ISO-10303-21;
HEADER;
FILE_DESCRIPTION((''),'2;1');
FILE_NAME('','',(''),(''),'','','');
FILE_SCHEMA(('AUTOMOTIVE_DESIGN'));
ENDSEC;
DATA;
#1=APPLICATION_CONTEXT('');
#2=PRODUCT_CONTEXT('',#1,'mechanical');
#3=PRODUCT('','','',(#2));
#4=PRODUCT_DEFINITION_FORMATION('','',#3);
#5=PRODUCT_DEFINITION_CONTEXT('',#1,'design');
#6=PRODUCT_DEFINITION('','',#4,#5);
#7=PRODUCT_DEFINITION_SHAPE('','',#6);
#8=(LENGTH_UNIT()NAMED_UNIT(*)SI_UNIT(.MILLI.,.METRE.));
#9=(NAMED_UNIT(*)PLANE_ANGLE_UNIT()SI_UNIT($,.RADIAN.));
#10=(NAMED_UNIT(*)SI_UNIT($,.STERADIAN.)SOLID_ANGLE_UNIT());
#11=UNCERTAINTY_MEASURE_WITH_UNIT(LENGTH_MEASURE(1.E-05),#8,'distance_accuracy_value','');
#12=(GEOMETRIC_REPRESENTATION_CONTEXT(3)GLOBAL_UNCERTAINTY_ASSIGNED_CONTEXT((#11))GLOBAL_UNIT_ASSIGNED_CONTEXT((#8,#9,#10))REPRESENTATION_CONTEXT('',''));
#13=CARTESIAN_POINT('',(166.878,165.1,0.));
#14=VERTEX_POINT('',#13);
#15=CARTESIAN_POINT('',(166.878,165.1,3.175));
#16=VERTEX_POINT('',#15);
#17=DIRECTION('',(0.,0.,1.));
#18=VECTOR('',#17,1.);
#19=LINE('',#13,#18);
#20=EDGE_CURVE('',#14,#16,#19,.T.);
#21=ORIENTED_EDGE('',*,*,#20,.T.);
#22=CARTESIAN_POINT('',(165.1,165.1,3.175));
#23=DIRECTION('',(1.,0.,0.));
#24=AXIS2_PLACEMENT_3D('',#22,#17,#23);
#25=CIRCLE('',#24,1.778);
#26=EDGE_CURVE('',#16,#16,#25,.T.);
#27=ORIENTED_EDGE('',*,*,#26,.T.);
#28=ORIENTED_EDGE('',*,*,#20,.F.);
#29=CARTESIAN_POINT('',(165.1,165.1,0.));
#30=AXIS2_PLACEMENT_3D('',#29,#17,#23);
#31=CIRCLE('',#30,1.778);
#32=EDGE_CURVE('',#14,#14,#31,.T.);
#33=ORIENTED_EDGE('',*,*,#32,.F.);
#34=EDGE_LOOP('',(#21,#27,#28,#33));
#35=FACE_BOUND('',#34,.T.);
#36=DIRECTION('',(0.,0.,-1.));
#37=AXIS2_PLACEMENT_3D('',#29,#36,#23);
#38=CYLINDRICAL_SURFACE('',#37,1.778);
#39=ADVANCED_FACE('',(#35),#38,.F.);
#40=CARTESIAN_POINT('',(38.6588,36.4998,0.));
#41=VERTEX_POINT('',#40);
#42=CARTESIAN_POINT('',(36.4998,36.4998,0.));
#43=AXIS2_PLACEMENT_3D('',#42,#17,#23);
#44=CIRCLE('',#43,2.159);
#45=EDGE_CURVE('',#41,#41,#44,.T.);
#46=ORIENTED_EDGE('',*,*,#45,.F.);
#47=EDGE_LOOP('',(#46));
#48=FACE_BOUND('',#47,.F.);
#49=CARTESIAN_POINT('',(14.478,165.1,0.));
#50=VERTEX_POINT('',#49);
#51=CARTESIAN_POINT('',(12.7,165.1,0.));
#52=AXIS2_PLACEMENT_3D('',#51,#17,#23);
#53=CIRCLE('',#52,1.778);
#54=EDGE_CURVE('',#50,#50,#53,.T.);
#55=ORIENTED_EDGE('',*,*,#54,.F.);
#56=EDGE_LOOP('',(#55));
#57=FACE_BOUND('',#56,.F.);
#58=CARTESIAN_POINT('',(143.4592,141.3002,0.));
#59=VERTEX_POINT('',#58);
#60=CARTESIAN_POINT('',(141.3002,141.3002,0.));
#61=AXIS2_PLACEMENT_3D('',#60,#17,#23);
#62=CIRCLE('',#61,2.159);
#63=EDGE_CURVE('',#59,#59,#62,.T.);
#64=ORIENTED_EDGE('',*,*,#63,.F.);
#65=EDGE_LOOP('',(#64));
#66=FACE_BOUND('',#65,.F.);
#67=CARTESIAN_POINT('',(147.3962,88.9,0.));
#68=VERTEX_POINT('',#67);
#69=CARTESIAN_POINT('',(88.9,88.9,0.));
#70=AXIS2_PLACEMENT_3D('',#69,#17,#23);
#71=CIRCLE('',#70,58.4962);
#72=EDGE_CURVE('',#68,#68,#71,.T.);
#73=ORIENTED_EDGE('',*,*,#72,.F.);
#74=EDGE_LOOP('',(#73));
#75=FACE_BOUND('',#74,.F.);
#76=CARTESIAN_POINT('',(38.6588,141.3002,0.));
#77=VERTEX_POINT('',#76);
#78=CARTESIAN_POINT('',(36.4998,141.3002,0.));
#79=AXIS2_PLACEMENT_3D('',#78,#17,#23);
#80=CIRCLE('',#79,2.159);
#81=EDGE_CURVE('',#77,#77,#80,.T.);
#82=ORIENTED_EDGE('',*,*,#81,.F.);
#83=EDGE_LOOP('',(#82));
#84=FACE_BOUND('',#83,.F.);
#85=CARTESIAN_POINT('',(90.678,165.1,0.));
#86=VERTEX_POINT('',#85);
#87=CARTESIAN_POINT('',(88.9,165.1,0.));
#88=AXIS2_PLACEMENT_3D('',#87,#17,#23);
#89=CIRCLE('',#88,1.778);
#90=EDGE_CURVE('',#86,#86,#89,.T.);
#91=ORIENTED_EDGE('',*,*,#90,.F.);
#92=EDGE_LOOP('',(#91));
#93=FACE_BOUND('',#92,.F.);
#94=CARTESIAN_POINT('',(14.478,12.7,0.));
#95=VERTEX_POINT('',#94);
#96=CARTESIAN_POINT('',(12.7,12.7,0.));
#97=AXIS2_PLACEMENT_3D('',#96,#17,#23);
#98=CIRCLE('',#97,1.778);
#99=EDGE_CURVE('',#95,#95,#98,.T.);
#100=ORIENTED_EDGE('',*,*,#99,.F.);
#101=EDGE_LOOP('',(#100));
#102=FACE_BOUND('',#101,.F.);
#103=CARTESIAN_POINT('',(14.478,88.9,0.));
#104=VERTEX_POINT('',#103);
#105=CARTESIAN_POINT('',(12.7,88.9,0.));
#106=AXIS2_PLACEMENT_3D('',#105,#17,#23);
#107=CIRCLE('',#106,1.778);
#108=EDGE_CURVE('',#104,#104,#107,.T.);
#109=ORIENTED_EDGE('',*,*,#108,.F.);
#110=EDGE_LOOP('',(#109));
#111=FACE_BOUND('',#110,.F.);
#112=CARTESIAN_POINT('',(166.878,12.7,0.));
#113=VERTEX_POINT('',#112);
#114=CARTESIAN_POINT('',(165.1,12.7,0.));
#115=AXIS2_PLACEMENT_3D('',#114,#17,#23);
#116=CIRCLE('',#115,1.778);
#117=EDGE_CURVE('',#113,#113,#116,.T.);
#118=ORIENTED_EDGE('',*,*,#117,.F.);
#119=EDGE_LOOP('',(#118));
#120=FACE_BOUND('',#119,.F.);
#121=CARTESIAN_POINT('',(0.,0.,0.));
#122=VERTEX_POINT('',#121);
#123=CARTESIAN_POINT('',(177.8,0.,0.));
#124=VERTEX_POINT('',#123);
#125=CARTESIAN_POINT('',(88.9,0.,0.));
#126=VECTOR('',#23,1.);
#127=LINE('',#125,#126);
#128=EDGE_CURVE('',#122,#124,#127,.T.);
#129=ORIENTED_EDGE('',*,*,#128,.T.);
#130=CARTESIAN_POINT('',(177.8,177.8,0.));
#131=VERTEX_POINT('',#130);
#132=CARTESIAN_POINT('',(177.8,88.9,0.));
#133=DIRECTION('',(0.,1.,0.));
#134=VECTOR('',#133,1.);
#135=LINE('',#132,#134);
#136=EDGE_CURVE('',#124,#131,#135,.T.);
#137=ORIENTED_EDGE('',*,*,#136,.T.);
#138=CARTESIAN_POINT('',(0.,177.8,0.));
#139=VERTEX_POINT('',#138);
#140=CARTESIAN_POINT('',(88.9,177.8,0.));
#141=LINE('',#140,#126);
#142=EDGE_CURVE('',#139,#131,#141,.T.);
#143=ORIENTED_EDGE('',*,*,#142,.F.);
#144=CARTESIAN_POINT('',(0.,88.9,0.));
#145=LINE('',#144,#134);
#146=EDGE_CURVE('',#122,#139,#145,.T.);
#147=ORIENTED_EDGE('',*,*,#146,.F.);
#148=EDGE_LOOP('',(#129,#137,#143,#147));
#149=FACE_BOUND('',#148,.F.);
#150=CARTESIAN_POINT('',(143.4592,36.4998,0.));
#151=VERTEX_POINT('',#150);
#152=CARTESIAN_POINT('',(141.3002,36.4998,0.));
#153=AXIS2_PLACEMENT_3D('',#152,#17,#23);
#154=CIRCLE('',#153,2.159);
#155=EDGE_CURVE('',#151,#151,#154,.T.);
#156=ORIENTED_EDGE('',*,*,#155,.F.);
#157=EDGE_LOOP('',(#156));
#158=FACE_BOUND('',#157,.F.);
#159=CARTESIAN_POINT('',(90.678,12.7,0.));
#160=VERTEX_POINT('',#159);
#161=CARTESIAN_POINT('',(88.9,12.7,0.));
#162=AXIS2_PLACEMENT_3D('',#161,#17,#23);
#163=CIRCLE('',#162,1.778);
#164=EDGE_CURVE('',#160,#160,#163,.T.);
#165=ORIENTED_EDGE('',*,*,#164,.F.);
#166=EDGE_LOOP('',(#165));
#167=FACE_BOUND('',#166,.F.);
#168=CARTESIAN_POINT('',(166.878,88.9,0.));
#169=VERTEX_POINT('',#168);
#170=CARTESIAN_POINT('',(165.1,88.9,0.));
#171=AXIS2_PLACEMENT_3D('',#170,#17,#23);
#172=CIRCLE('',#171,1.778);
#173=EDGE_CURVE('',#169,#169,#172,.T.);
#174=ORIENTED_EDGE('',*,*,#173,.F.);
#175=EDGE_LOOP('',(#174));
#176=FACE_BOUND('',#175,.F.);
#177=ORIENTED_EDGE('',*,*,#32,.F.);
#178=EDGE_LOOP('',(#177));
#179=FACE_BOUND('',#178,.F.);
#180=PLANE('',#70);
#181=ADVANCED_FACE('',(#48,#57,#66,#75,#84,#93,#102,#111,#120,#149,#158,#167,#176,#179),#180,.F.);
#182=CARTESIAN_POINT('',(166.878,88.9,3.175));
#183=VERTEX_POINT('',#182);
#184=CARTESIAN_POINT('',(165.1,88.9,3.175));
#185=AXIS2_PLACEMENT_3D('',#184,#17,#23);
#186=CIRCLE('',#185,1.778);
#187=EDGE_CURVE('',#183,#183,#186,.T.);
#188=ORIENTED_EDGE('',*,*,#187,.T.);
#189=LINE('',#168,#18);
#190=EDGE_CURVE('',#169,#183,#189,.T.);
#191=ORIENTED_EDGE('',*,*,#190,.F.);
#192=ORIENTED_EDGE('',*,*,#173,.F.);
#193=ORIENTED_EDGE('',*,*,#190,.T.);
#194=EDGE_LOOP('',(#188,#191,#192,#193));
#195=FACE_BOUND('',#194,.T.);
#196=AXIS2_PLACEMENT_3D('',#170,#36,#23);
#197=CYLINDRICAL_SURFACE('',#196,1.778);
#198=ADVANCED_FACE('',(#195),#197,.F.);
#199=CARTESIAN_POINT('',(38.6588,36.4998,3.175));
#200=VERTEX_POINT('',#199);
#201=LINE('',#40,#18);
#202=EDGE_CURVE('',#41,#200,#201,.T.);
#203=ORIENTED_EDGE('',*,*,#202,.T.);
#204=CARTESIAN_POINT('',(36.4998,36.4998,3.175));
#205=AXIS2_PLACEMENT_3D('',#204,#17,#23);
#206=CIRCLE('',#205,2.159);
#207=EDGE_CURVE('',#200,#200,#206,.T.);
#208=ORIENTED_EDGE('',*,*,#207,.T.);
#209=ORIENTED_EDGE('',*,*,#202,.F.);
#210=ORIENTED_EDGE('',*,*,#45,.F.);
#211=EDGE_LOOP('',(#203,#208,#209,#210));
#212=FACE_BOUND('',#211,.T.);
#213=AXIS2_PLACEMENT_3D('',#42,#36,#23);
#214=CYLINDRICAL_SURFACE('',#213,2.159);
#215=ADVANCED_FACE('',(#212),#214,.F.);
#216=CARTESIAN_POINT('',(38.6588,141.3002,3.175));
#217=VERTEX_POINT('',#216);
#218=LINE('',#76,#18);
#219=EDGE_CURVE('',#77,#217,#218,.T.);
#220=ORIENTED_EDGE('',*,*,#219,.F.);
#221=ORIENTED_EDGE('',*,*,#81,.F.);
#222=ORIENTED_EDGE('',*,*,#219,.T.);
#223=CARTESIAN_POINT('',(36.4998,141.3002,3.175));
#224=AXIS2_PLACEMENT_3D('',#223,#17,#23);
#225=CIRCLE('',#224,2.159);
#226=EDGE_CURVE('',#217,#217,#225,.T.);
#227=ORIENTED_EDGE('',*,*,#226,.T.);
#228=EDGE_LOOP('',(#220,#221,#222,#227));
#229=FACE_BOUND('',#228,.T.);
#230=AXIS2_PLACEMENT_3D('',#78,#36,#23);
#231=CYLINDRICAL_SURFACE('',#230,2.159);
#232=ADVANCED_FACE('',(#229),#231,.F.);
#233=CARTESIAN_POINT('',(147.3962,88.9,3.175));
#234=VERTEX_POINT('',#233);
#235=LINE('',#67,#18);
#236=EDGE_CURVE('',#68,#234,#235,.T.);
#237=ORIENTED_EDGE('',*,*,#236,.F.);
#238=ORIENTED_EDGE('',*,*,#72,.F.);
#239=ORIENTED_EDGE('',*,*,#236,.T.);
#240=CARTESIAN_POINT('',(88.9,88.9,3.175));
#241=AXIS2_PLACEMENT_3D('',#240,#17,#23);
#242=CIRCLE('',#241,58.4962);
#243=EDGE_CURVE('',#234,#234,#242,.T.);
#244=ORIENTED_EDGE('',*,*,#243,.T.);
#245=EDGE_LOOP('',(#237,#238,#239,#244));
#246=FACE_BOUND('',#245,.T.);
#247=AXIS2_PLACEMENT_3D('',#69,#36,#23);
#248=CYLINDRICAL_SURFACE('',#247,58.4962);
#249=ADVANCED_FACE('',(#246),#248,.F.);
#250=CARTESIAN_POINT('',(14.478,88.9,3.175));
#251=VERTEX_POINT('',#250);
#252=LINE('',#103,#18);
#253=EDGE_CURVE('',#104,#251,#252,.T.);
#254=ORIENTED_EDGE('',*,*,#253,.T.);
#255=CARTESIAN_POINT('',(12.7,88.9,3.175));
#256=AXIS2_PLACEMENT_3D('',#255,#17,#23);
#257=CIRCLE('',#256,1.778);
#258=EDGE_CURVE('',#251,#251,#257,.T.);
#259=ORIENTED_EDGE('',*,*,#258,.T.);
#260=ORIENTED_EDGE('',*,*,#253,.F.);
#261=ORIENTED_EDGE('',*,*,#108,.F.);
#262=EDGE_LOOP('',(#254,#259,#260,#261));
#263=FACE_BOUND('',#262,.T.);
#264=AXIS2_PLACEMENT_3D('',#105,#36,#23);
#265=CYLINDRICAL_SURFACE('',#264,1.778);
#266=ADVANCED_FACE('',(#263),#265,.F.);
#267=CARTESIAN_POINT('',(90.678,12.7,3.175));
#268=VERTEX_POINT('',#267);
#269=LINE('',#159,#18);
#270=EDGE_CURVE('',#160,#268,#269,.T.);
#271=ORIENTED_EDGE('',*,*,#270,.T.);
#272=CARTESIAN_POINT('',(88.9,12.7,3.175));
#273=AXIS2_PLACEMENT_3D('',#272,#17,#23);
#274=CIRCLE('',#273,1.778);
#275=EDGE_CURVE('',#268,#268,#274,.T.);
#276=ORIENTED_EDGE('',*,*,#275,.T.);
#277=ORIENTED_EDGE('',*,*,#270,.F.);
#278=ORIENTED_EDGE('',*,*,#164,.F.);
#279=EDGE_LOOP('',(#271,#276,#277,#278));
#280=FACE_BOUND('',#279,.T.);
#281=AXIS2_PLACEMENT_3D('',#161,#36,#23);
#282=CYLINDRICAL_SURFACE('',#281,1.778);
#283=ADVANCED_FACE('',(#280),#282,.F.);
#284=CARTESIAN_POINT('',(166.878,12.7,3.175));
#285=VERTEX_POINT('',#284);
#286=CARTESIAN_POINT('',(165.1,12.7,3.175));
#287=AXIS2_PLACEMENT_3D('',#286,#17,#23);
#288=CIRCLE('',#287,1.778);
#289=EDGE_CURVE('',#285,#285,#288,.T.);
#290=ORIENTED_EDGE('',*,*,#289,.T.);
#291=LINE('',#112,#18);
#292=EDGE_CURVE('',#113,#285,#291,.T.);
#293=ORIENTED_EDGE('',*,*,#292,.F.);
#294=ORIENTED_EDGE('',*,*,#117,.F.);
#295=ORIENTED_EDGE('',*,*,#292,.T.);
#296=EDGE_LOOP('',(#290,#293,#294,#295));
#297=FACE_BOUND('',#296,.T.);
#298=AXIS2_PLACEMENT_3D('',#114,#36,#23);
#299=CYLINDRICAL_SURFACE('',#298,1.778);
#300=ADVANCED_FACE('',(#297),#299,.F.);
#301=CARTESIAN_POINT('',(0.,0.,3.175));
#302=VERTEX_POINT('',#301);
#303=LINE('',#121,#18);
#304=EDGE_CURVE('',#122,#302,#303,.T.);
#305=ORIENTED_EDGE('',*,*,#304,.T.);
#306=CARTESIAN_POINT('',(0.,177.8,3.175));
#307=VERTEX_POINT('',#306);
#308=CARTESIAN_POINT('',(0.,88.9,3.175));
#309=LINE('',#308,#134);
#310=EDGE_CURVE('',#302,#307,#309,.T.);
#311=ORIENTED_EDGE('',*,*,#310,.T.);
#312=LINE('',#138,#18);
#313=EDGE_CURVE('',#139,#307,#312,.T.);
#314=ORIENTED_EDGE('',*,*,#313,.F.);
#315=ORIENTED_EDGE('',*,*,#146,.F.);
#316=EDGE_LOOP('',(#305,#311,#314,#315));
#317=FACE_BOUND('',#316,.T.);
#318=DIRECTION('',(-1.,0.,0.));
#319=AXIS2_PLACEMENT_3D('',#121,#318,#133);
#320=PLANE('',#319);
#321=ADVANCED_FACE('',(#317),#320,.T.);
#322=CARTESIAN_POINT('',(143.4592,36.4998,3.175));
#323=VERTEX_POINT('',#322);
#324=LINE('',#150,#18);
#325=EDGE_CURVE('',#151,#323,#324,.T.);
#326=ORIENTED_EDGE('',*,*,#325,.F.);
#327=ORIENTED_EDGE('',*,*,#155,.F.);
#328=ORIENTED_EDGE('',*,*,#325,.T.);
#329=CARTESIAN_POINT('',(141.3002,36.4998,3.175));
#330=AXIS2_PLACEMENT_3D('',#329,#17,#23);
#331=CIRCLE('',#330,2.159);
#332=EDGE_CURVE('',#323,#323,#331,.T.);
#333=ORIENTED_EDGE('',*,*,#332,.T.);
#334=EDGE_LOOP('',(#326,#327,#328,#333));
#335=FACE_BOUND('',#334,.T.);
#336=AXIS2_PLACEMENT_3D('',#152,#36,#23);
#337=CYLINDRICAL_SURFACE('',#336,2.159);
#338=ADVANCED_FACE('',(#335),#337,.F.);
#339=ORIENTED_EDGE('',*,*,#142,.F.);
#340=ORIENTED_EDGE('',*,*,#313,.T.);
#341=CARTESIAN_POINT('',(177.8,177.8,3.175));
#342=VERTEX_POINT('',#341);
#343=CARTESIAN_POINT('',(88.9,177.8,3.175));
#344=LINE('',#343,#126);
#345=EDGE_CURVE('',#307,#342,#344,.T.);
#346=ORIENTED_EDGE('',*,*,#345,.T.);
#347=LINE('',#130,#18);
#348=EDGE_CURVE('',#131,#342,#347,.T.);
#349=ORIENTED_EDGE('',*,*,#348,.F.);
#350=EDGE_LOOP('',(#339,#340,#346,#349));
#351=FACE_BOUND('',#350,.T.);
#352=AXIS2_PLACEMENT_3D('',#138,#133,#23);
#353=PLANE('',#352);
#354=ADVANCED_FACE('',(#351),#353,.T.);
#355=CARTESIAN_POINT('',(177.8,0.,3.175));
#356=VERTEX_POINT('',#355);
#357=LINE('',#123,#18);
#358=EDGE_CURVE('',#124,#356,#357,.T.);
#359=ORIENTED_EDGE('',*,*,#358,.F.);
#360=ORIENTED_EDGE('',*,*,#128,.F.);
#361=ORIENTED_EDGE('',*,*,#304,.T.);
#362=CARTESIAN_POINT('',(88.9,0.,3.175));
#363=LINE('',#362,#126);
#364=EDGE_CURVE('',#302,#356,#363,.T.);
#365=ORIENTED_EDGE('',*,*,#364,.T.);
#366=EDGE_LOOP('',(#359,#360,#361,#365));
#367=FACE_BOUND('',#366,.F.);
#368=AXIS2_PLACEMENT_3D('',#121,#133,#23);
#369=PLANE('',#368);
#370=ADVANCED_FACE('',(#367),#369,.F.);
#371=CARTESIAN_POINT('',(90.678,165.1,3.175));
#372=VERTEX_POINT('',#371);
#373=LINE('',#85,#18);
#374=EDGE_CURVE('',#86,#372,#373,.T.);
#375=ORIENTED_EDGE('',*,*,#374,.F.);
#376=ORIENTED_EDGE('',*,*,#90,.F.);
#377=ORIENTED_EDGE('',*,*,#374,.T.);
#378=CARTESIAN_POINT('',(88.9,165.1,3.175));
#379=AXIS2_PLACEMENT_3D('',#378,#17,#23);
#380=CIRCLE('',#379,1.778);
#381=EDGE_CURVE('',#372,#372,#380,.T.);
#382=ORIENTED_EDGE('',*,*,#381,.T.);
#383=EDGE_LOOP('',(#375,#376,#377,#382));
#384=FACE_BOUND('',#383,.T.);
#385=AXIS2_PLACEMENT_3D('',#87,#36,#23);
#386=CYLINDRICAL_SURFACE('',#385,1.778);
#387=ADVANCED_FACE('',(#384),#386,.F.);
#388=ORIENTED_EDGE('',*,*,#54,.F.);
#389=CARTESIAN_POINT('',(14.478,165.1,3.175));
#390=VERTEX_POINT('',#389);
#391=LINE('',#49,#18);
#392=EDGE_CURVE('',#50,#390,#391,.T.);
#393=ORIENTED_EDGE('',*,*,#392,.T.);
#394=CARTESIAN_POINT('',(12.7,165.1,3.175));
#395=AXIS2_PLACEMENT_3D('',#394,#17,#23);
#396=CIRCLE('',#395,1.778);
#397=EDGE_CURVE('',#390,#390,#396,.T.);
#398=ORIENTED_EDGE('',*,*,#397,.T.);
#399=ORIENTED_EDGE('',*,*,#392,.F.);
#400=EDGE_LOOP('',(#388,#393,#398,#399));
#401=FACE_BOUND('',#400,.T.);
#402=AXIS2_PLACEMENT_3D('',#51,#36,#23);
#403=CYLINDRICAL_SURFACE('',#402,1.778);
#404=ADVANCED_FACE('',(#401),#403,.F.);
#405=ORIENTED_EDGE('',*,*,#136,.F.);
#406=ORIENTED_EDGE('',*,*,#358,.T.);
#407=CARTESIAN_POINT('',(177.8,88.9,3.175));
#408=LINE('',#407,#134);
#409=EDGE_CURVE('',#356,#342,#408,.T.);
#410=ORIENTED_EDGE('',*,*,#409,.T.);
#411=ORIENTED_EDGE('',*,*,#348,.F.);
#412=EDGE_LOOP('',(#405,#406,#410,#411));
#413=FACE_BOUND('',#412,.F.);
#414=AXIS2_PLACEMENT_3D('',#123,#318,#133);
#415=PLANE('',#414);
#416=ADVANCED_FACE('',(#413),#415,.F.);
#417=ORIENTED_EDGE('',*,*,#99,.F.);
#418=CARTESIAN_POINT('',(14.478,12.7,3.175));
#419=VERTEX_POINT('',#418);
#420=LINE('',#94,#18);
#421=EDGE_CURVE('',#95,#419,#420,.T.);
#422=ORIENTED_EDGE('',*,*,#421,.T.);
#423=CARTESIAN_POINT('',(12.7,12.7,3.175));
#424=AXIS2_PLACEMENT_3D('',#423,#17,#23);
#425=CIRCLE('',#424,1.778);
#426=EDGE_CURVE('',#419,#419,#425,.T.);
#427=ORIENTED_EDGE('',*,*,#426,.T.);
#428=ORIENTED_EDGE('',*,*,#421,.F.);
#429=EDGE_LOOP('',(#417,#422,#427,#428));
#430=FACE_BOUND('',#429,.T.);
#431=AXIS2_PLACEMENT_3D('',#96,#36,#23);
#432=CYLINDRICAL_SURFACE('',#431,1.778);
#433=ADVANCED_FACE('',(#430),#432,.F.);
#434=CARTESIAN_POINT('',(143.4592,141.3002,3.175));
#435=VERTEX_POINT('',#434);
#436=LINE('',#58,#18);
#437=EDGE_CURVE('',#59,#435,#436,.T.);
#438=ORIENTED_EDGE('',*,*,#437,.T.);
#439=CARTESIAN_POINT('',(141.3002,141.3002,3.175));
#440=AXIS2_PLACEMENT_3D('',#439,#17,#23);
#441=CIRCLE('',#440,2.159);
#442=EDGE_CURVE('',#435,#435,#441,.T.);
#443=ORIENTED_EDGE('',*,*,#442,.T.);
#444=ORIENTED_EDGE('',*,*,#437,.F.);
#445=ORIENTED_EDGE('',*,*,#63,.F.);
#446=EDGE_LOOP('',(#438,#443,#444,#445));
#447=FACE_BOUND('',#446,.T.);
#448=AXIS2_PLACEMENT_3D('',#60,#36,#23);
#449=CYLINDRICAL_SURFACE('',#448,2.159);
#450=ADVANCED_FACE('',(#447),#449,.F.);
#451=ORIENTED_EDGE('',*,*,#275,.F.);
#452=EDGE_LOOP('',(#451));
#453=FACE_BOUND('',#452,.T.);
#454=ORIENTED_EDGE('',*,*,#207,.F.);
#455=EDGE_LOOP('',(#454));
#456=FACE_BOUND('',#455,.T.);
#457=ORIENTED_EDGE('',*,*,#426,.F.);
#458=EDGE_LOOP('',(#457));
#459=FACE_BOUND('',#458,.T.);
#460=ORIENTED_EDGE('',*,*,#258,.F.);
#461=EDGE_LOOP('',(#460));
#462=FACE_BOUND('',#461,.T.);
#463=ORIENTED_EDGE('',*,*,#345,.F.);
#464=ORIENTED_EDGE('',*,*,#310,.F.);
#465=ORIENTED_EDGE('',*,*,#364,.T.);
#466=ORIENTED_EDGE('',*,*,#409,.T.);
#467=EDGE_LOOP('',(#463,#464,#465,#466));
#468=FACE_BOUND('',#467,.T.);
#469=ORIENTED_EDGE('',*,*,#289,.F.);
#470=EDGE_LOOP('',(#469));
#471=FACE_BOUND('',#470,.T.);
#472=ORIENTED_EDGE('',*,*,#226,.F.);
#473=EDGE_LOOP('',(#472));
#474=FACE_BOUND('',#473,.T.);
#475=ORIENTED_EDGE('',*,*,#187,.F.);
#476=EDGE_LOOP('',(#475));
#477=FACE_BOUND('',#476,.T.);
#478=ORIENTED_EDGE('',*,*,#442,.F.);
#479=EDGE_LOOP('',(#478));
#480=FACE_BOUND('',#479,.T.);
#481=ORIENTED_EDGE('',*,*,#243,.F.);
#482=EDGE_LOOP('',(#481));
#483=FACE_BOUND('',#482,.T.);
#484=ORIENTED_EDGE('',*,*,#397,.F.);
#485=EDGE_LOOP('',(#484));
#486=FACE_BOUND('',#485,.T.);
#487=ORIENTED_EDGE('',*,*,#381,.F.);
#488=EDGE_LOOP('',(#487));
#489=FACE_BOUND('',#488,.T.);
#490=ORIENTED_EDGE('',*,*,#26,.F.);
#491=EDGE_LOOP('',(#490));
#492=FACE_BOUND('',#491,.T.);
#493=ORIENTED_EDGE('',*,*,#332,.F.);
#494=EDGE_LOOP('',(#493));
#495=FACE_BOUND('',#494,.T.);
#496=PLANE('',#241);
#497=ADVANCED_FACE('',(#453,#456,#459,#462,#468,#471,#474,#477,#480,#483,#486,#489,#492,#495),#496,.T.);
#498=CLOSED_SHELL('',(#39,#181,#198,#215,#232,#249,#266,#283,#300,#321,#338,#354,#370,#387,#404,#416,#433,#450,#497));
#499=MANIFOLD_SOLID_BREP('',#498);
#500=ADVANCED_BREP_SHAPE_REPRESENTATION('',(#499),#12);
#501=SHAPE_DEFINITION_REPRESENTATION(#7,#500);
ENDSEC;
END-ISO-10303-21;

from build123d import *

# Parameters (mm, degrees)
F0_W     = 177.8
F0_H     = 177.8
F0_R     = 1.778
F0_R_2   = 2.159
F0_R_3   = 58.4962
F1_DEPTH = 3.175


# Not quite as in the source:
# - a length typed as a fraction of an inch, garbled in the dataset ("3 / 203.2 mm" for 3/8 in), is restored


with BuildPart() as f1:
    # F0 (on Top) → F1 (new body)
    with BuildSketch(Plane.XY):
        with Locations((88.9, 88.9)):
            Rectangle(F0_W, F0_H)
        with Locations((12.7, 12.7)):
            Circle(F0_R, mode=Mode.SUBTRACT)
        with Locations((36.4998, 36.4998)):
            Circle(F0_R_2, mode=Mode.SUBTRACT)
        with Locations((88.9, 12.7)):
            Circle(F0_R, mode=Mode.SUBTRACT)
        with Locations((165.1, 12.7)):
            Circle(F0_R, mode=Mode.SUBTRACT)
        with Locations((141.3002, 36.4998)):
            Circle(F0_R_2, mode=Mode.SUBTRACT)
        with Locations((12.7, 88.9)):
            Circle(F0_R, mode=Mode.SUBTRACT)
        with Locations((36.4998, 141.3002)):
            Circle(F0_R_2, mode=Mode.SUBTRACT)
        with Locations((12.7, 165.1)):
            Circle(F0_R, mode=Mode.SUBTRACT)
        with Locations((88.9, 88.9)):
            Circle(F0_R_3, mode=Mode.SUBTRACT)
        with Locations((165.1, 88.9)):
            Circle(F0_R, mode=Mode.SUBTRACT)
        with Locations((88.9, 165.1)):
            Circle(F0_R, mode=Mode.SUBTRACT)
        with Locations((141.3002, 141.3002)):
            Circle(F0_R_2, mode=Mode.SUBTRACT)
        with Locations((165.1, 165.1)):
            Circle(F0_R, mode=Mode.SUBTRACT)
    extrude(amount=F1_DEPTH)


solid = f1.part
